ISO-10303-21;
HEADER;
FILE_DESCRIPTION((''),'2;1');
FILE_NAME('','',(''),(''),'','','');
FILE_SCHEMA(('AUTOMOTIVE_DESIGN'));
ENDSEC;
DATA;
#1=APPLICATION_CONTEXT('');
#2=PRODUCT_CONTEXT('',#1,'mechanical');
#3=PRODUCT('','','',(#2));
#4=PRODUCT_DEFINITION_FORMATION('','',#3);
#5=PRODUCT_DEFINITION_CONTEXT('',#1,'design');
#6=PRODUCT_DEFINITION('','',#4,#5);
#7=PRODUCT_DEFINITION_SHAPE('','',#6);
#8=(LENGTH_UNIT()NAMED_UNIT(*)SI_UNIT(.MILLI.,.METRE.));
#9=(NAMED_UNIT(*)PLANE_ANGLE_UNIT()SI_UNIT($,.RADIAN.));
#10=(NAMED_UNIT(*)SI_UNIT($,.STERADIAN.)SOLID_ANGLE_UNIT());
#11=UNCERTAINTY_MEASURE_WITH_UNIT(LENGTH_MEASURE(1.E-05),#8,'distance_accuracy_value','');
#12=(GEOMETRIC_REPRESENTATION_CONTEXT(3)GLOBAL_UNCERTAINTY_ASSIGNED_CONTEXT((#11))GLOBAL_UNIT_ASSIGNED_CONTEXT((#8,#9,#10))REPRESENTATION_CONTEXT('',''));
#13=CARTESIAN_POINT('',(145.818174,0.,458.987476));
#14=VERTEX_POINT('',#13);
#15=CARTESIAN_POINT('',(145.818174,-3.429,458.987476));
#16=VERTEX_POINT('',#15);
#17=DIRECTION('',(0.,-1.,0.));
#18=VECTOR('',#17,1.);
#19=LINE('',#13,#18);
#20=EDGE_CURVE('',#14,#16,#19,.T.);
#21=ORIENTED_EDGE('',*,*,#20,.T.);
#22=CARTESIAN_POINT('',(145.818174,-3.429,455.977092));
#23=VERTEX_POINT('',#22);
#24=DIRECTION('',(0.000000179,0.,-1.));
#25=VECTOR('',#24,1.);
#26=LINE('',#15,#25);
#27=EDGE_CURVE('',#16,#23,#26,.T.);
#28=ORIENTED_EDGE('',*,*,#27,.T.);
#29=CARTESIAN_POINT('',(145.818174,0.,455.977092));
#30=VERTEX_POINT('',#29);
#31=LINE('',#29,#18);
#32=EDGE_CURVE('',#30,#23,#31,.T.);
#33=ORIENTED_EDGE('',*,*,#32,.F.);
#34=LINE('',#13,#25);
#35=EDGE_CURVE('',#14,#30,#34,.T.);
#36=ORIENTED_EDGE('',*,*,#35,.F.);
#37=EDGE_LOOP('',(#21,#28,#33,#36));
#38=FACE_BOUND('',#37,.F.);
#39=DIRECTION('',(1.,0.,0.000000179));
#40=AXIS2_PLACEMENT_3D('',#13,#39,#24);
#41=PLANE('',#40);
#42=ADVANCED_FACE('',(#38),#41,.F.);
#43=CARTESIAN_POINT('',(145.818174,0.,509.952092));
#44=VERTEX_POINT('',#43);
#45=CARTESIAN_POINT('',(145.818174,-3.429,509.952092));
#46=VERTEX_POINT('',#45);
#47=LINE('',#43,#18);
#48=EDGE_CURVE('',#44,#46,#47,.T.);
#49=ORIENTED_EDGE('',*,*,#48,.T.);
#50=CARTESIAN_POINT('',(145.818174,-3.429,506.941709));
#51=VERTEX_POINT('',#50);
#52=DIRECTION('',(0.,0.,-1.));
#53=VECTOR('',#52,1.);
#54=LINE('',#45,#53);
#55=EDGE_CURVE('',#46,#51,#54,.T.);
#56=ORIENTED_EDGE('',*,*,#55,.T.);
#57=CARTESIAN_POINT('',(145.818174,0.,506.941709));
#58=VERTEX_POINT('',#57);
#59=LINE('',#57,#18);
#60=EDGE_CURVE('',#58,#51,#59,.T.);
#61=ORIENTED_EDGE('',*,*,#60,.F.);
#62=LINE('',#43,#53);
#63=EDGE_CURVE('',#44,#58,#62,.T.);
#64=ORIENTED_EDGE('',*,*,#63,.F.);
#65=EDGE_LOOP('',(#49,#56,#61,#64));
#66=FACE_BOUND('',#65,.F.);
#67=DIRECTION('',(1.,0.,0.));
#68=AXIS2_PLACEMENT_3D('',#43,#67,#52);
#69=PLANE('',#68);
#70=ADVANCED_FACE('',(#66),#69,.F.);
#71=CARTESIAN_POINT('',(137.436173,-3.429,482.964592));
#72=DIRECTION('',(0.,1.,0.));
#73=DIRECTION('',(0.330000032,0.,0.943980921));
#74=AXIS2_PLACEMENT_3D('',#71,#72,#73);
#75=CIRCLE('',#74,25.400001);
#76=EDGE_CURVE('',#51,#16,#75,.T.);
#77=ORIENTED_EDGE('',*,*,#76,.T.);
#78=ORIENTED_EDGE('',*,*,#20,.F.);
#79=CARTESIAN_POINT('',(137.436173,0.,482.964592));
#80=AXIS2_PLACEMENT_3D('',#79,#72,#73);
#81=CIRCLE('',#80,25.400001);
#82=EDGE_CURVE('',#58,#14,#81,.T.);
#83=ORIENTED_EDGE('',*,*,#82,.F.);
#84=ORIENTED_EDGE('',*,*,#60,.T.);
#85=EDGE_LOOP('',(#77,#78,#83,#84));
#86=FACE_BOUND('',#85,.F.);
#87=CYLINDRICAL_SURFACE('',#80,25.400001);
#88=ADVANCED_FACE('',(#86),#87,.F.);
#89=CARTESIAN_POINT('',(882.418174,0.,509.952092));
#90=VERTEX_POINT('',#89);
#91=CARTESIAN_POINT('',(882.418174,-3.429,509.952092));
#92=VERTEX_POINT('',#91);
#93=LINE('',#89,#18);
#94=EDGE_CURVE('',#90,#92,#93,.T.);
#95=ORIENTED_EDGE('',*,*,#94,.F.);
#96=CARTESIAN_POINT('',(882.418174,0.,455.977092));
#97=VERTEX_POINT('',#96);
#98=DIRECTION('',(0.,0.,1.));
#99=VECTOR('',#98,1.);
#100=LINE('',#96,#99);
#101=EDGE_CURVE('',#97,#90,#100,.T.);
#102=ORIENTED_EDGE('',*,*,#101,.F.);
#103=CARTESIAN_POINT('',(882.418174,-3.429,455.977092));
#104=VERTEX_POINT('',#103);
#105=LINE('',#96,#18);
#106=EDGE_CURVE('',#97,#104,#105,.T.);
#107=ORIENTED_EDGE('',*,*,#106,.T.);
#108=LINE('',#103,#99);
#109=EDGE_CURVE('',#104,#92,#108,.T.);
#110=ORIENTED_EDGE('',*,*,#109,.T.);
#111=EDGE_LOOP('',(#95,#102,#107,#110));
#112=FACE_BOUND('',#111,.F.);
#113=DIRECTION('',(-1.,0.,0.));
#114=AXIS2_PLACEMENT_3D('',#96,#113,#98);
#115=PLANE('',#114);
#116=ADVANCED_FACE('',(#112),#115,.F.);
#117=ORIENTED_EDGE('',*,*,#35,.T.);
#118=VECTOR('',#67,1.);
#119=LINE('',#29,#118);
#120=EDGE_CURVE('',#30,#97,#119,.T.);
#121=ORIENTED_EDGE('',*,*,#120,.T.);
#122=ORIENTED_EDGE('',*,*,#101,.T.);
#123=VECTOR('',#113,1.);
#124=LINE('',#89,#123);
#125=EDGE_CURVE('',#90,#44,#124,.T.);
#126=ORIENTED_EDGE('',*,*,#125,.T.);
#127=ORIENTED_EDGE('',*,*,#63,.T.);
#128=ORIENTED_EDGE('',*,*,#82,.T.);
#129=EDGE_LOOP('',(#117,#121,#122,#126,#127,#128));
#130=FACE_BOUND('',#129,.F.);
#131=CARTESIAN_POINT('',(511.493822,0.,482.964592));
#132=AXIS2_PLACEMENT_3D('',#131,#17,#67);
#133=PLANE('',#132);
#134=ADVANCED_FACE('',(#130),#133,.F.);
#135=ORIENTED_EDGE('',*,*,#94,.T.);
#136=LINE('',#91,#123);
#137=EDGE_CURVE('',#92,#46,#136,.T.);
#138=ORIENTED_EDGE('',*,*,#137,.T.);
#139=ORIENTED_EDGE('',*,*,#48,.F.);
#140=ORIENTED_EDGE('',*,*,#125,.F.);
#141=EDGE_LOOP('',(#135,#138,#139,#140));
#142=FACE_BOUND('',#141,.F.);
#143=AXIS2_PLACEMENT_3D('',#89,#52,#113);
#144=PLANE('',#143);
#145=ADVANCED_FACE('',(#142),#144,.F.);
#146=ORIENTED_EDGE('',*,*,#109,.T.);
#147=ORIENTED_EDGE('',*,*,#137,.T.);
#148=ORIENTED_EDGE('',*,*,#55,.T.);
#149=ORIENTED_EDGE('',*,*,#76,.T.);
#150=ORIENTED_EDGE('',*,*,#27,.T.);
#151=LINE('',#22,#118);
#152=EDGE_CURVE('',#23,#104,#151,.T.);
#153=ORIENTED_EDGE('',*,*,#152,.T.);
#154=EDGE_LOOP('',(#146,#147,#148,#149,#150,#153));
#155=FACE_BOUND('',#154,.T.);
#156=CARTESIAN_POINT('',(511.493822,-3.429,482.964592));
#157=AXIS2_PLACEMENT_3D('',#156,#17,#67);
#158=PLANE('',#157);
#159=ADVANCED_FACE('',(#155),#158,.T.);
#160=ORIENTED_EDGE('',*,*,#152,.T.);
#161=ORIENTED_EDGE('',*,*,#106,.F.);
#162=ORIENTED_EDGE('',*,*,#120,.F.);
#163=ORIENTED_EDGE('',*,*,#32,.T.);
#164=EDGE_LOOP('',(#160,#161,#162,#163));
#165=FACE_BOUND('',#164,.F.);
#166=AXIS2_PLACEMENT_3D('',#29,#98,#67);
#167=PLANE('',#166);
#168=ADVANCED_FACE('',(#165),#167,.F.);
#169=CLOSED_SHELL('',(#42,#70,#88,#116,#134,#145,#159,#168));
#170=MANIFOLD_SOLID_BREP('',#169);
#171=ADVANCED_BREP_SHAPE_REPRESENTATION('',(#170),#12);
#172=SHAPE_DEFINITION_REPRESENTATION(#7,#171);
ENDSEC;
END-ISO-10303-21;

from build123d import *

# Parameters (mm, degrees)
F1_DEPTH = 3.429


# Not quite as in the source:
# - ends of sketch curves that miss each other by under 0.0002 mm in the source are joined


with BuildPart() as f1:
    # F0 (on Front) → F1 (new body)
    with BuildSketch(Plane.XZ):
        with BuildLine():
            Line((882.4181742, 455.9770916), (882.4181742, 509.9520916))
            Line((882.4181742, 509.9520916), (145.8181742, 509.9520916))
            Line((145.8181742, 509.9520916), (145.8181742, 506.941709))
            ThreePointArc((145.8181742, 506.941709), (162.8361742, 482.9645916), (145.818173662, 458.9874757389))
            Line((145.818173662, 458.9874757389), (145.8181742, 455.9770916))
            Line((145.8181742, 455.9770916), (882.4181742, 455.9770916))
        make_face()
    extrude(amount=F1_DEPTH)


solid = f1.part
